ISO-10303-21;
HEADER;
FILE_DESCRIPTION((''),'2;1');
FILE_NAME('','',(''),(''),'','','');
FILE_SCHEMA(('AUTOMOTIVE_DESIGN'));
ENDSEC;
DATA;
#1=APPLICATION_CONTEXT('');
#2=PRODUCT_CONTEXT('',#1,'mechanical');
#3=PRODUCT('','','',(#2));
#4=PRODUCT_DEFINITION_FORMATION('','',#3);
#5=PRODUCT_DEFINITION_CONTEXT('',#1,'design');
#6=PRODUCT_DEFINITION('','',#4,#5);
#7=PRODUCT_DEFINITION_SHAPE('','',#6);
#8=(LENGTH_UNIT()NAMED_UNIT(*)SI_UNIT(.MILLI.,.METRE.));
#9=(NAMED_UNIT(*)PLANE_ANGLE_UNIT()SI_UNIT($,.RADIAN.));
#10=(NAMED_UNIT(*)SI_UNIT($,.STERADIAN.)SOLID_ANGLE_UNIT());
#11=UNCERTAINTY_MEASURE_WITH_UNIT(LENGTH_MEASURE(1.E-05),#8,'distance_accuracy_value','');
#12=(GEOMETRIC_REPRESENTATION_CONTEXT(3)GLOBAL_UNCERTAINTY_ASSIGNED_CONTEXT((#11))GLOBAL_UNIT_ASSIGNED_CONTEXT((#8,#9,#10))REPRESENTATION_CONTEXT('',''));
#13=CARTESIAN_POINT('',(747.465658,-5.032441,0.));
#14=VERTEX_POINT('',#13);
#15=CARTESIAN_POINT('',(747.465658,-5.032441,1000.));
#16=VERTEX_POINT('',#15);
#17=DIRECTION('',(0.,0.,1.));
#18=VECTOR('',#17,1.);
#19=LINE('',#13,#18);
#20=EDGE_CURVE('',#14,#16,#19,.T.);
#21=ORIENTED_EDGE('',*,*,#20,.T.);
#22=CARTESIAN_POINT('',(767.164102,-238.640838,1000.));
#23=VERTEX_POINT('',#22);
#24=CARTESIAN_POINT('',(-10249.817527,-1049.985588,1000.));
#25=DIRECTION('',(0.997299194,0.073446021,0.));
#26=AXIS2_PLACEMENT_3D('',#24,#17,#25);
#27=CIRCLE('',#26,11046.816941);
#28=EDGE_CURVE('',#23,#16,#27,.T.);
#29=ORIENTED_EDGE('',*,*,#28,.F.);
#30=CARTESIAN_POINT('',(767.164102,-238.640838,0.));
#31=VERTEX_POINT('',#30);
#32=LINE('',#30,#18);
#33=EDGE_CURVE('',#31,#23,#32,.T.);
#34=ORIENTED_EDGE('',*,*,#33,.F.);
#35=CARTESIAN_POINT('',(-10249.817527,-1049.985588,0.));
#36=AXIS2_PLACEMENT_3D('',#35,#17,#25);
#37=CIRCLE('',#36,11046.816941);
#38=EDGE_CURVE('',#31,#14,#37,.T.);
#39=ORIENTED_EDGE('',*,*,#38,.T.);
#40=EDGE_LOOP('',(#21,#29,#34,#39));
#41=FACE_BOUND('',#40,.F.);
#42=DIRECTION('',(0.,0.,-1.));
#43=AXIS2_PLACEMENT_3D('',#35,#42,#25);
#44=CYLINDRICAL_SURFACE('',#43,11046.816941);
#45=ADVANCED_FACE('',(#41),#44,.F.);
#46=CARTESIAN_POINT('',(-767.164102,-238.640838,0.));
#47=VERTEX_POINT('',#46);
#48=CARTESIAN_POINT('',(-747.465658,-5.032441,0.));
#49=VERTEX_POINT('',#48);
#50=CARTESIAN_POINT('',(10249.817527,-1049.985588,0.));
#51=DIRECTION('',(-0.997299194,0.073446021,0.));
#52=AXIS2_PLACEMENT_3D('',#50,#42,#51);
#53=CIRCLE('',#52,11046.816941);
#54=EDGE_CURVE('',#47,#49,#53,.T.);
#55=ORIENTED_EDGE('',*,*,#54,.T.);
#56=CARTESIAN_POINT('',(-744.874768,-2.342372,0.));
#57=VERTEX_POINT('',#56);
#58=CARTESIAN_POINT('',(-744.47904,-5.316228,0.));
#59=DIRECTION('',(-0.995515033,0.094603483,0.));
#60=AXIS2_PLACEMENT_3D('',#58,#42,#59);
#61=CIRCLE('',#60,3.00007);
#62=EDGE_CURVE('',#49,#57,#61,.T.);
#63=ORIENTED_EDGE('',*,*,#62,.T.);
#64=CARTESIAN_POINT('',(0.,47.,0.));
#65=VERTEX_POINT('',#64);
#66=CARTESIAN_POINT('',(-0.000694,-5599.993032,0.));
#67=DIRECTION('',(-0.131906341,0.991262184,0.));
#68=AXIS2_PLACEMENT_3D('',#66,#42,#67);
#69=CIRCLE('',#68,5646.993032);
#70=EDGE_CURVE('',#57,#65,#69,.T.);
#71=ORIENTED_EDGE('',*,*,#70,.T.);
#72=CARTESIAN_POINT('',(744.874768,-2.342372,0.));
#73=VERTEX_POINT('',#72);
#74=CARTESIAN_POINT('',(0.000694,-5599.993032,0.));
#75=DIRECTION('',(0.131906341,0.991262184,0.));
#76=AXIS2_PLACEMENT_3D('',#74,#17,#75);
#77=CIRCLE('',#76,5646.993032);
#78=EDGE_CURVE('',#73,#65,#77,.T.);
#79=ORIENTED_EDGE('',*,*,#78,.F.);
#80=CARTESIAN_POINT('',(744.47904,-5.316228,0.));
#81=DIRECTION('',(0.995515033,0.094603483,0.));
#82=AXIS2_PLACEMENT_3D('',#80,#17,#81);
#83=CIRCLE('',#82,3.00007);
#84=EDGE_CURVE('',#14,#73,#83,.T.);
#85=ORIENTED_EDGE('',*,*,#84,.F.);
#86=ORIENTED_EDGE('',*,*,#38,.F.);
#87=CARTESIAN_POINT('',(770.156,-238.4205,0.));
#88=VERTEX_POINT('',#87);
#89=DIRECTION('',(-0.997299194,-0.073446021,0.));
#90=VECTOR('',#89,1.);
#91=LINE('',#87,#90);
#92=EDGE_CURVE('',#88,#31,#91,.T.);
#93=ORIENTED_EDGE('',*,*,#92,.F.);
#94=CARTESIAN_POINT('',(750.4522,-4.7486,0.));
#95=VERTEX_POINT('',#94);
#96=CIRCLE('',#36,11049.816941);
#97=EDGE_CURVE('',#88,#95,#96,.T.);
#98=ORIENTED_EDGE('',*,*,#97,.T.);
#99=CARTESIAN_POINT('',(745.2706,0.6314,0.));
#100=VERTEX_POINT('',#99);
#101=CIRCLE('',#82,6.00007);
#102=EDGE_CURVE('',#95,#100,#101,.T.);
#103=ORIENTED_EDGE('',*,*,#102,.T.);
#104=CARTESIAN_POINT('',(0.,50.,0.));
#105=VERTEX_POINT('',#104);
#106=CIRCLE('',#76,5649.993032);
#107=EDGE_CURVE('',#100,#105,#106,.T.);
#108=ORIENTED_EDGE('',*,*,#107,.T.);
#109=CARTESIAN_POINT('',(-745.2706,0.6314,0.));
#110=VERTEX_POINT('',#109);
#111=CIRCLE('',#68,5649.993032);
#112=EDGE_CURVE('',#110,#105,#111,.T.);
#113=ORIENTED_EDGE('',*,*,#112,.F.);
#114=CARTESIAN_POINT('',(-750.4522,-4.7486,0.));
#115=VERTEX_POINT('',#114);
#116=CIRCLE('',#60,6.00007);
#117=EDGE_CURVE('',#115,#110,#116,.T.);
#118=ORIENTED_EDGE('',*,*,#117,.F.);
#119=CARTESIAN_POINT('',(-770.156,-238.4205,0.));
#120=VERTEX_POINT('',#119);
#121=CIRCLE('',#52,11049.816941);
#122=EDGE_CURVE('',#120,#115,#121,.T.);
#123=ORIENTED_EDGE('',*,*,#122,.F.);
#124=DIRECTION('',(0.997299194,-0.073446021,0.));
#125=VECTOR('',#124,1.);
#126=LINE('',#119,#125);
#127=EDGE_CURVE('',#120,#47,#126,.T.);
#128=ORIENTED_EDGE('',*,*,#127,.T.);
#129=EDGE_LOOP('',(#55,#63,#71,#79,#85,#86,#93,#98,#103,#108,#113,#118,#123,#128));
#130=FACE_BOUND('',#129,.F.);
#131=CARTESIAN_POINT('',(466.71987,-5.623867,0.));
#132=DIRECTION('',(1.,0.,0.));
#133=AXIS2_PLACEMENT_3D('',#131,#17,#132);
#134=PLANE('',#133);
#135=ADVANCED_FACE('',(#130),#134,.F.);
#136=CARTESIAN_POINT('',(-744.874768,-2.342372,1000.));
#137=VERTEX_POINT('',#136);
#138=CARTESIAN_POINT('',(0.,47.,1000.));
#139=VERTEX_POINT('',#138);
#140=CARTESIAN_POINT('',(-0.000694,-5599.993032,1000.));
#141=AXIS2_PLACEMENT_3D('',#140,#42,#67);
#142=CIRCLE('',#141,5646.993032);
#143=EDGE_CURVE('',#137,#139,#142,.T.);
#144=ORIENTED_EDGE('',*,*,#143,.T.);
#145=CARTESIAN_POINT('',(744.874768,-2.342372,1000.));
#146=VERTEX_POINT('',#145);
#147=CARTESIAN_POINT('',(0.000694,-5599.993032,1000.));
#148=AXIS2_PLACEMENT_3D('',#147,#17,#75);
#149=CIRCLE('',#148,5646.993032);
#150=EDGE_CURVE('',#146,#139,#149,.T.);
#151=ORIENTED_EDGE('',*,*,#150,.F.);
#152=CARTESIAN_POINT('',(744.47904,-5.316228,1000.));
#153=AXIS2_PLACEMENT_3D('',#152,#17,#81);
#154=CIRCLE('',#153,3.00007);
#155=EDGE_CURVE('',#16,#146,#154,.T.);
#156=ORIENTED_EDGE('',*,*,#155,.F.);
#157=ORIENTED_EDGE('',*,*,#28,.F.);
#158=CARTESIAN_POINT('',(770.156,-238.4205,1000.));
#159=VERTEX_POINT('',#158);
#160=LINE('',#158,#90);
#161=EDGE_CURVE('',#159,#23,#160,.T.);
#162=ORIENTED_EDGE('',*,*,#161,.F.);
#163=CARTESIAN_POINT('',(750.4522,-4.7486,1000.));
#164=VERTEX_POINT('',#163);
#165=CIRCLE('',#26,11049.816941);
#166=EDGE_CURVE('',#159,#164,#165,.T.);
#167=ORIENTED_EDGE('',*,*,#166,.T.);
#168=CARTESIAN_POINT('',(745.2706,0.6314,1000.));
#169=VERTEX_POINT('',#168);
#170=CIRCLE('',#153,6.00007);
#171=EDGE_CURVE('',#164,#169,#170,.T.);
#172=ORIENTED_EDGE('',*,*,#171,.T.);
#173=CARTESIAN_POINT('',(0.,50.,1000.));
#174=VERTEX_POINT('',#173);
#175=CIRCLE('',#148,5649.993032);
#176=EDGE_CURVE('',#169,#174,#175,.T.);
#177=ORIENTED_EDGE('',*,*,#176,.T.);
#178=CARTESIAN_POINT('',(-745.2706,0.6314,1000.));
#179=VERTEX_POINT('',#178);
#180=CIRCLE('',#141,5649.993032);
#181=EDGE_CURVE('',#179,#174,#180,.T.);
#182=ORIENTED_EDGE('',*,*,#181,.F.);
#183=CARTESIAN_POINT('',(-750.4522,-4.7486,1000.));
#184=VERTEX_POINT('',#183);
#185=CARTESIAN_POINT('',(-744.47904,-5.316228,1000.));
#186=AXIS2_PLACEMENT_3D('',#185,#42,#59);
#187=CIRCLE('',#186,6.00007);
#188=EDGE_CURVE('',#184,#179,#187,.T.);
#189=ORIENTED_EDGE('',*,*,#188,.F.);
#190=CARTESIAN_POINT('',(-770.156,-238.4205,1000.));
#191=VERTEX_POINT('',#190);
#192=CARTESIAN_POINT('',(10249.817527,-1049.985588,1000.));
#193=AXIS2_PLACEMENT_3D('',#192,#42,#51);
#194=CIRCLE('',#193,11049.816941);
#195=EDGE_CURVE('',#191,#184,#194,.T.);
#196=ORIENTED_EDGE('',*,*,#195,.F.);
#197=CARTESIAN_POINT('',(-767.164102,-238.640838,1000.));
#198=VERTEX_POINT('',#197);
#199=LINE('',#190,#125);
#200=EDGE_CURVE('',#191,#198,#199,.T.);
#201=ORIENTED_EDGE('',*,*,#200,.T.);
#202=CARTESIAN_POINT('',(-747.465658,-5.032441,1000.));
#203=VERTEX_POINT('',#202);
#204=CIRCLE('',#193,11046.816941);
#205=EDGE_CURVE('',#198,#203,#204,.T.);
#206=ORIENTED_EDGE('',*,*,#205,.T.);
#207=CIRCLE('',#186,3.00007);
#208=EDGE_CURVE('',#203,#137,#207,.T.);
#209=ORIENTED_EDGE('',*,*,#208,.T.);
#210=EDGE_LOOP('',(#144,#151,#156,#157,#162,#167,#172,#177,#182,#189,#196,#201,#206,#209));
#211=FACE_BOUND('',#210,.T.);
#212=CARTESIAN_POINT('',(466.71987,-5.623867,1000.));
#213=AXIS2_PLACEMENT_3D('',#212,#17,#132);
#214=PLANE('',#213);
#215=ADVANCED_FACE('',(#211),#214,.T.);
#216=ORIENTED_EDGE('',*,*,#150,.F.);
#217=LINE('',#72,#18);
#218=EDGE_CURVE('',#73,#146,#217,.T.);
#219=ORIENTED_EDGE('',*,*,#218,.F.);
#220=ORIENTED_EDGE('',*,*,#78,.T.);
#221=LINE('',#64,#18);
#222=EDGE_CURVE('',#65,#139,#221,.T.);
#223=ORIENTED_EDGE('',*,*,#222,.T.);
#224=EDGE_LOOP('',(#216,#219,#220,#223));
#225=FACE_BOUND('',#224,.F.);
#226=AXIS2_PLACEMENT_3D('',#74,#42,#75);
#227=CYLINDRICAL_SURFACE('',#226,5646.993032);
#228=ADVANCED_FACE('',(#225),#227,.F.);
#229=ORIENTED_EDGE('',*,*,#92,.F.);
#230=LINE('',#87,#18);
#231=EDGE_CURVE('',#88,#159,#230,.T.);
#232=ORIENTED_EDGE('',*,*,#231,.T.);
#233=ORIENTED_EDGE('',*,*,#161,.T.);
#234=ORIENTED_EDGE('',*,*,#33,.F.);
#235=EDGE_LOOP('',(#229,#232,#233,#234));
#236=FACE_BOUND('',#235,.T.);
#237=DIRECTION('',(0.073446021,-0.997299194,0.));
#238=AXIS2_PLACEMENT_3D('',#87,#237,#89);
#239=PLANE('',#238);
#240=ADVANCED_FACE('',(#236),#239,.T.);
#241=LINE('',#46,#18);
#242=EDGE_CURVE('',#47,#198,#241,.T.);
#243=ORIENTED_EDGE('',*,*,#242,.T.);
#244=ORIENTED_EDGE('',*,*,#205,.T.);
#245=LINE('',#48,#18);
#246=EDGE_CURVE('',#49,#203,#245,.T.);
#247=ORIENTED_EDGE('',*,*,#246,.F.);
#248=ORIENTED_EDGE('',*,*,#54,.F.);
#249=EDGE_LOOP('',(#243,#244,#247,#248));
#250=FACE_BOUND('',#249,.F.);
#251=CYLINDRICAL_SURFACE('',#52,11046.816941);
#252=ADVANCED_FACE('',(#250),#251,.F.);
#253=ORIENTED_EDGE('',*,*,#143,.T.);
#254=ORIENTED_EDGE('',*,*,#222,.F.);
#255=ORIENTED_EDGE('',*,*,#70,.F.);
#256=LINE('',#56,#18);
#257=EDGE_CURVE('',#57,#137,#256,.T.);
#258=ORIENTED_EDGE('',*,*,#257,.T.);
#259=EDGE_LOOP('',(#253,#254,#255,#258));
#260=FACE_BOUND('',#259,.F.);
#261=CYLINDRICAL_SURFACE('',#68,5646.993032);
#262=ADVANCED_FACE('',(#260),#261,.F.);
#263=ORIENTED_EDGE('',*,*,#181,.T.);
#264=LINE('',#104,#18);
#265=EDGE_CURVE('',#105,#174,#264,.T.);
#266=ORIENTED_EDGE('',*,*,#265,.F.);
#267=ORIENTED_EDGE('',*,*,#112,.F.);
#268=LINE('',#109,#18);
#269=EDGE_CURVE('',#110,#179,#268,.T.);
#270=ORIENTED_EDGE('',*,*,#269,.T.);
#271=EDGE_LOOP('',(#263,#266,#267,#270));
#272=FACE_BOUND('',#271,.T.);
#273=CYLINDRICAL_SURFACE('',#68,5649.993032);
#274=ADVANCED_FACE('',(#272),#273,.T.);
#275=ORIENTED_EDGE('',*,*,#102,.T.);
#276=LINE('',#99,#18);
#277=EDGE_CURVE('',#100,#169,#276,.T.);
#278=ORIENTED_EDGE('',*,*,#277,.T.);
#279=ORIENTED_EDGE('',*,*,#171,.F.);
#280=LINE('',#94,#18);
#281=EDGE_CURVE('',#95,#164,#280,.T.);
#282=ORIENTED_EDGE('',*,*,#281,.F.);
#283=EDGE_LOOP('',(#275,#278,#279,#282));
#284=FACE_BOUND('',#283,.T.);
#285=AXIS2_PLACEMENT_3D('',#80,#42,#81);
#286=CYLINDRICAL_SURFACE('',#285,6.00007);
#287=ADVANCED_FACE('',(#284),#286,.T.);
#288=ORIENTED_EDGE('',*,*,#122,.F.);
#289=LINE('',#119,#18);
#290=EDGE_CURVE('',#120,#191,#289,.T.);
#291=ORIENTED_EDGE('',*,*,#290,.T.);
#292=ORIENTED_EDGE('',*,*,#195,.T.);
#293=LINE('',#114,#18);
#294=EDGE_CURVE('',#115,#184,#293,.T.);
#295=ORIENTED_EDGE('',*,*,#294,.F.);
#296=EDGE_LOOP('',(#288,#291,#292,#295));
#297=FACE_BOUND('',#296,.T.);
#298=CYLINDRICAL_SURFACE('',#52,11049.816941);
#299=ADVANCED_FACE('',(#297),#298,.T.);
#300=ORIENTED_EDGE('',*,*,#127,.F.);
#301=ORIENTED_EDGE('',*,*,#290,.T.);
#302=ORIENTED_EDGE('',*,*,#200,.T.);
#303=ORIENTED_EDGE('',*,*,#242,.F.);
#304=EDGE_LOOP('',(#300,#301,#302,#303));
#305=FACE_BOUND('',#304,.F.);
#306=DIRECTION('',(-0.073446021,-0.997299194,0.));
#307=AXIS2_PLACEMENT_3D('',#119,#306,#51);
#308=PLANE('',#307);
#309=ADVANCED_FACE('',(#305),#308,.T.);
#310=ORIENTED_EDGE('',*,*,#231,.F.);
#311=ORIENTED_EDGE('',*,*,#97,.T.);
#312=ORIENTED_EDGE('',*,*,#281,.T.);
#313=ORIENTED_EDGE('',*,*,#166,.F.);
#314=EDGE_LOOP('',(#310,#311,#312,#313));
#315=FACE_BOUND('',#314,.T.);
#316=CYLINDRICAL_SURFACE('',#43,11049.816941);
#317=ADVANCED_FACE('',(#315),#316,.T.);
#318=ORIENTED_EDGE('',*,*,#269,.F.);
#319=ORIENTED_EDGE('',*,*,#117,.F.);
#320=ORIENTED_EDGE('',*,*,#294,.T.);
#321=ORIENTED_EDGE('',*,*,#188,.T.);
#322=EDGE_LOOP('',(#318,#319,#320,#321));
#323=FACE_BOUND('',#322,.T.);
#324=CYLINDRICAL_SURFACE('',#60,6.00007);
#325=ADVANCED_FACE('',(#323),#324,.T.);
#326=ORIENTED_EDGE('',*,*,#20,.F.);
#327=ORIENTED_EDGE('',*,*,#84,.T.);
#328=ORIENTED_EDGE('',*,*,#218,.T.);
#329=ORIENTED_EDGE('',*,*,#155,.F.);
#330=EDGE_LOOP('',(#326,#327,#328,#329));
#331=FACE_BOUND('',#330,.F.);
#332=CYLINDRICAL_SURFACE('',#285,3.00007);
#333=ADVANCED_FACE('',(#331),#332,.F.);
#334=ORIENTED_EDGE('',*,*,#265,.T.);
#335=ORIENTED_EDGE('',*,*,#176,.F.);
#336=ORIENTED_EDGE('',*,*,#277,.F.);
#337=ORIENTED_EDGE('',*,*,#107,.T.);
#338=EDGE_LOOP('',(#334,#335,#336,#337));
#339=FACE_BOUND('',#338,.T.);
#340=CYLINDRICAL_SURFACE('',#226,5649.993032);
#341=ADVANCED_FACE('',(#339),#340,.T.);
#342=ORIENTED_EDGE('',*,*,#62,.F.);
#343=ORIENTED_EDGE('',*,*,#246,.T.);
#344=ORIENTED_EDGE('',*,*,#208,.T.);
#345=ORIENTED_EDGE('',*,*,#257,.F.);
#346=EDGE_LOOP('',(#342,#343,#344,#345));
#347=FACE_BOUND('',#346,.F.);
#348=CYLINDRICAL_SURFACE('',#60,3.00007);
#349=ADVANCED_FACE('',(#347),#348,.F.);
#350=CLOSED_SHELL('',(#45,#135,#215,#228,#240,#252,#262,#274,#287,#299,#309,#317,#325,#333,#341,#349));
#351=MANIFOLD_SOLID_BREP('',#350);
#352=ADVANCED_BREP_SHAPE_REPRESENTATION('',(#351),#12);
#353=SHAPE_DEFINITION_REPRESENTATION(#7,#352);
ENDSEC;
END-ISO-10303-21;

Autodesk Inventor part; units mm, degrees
ref_plane "YZ Plane" through (0, 0, 0) normal (1, 0, 0) x (0, 1, 0)
ref_plane "XZ Plane" through (0, 0, 0) normal (0, 1, 0) x (-1, 0, 0)
ref_plane "XY Plane" through (0, 0, 0) normal (0, 0, 1) x (1, 0, 0)
sketch "Sketch1" plane through (0, 0, 0) normal (0, 0, 1) x (1, 0, 0)
  line L0 (-750, 0) -> (750, 0) construction
  line L1 (750, 0) -> (750, -2700) construction
  line L2 (750, -2700) -> (-750, -2700) construction
  line L3 (-750, -2700) -> (-750, 0) construction
  line L4 (800, 50) -> (-800, 50) construction
  line L5 (-800, 50) -> (-800, -2750) construction
  line L6 (-800, -2750) -> (800, -2750) construction
  line L7 (800, -2750) -> (800, 50) construction
  line L8 (-850, 100) -> (850, 100) construction
  line L9 (850, 100) -> (850, -2800) construction
  line L10 (850, -2800) -> (-850, -2800) construction
  line L11 (-850, -2800) -> (-850, 100) construction
  arc A0 (750, 0) -> (745.2706, 0.6314) centre (0, -5600) ccw construction
  line L12 (-750, -2100) -> (750, -2100) construction
  line L13 (114.1118, -2698.3696) -> (750, -2100) construction
  arc A1 (750, -2100) -> (770.156, -238.4205) centre (-10250, -1050) ccw construction
  line L14 (750, 0) -> (749.6018, -2.9735) construction
  arc A2 (750, -3.0268) -> (0, 47) centre (-0.2, -5603) ccw construction
  line L15 (750, 0) -> (747.0136, -0.2851) construction
  arc A3 (767.1641, -238.6409) -> (747.4657, -5.0326) centre (-10252.9895, -1050.2527) ccw construction
  arc A4 (750.4522, -4.7486) -> (745.2706, 0.6314) centre (744.4791, -5.3162) ccw
  arc A5 (747.4657, -5.0326) -> (744.8748, -2.3426) centre (744.4792, -5.3164) ccw construction
  line L16 (750, -2100) -> (752.9864, -2100.2851) construction
  arc A6 (752.9864, -2100.2851) -> (771.2831, -213.263) centre (-10246.9891, -1050.0292) ccw construction
  line L17 (750, -2100) -> (752.0559, -2102.1848) construction
  line L18 (752.0559, -2102.1848) -> (752.0559, -2102.1848) construction
  arc A7 (749.1768, -2100.7746) -> (750.1074, -2098.8746) centre (747.1209, -2098.5898) ccw construction
  line L19 (0, -2697) -> (110, -2697) construction
  line L20 (112.0559, -2696.1848) -> (685.3133, -2156.7506) construction
  arc A8 (110, -2700) -> (114.1118, -2698.3696) centre (110, -2694) ccw construction
  arc A9 (110, -2697) -> (112.0559, -2696.1848) centre (110, -2694) ccw construction
  line L21 (685.3133, -2156.7506) -> (687.3692, -2158.9354) construction
  line L22 (752.0559, -2102.1848) -> (671.2185, -2178.2526) construction
  line L23 (671.2185, -2178.2526) -> (669.1626, -2176.0678) construction
  arc A10 (747.4657, -5.0326) -> (747.0136, -0.2851) centre (-10252.9895, -1050.2527) ccw construction
  arc A11 (745.2706, 0.6314) -> (0, 50) centre (0, -5600) ccw
  arc A12 (750.4522, -4.7486) -> (750, 0) centre (-10250, -1050) ccw construction
  line L24 (770.156, -238.4205) -> (767.1641, -238.6409) construction
  line L25 (768.2917, -213.4901) -> (771.2831, -213.263) construction
  arc A13 (770.156, -238.4205) -> (750.4522, -4.7486) centre (-10250, -1050) ccw
  line L26 (0, 100) -> (0, 50) construction
  line L27 (0, -2700) -> (0, -2697) construction
  line L28 (0, 47) -> (0, 0) construction
  line L29 (0, 50) -> (0, 47) construction
  arc A14 (752.0559, -2102.1848) -> (752.9864, -2100.2851) centre (749.9998, -2099.9999) ccw construction
  point P0 (0, -2750)
  dimension "d54" = 1500
  dimension "d55" = 2700
  dimension "d58" = 2100
  dimension "d68" = 6
  dimension "d70" = 3
  dimension "d75" = 3
  dimension "d83" = 6
  dimension "d86" = 3
  dimension "d112" = 239.271
  dimension "d113" = 50
  dimension "d114" = 50
  dimension "d115" = 3
  dimension "d117" = 110
  dimension "d118" = 25
  dimension "d119" = 111
  dimension "d120" = 25
contour flange "Contour Flange2" sketch "Sketch1" thickness 3 bend radius 3 width 1000 along (0, 0, 1) mid plane no both sides no wall seen from (760.924, -121.5323, 0) lies toward (-0.9964637, -0.0840242, 0) curves A13 A4 A11
bend "Bend2"
corner "Corner2"
mirror "Mirror2" about plane through (0, 0, 0) normal (1, 0, 0)
equation "\"d36\" = Thickness"
equation "\"d37\" = BendReliefWidth"
equation "\"d38\" = BendReliefDepth"
equation "\"d39\" = MinimumRemnant"
equation "\"d40\" = TransitionRadius"
equation "\"d42\" = BendRadius"
equation "\"d44\" = CornerReliefSize"
equation "\"d45\" = GapSize"
equation "\"d46\" = JacobiRadiusSize"
equation "\"BendRadius\" = Thickness"
equation "\"BendReliefWidth\" = Thickness"
equation "\"BendReliefDepth\" = 0.5 * Thickness"
equation "\"CornerReliefSize\" = 4 * Thickness"
equation "\"MinimumRemnant\" = 2 * Thickness"
equation "\"TransitionRadius\" = BendRadius"
equation "\"JacobiRadiusSize\" = BendRadius"
equation "\"GapSize\" = Thickness"
equation "\"Thickness\" = 3"
properties part number "МОО 033 лист спина 1" material "Stainless Steel AISI 304"
